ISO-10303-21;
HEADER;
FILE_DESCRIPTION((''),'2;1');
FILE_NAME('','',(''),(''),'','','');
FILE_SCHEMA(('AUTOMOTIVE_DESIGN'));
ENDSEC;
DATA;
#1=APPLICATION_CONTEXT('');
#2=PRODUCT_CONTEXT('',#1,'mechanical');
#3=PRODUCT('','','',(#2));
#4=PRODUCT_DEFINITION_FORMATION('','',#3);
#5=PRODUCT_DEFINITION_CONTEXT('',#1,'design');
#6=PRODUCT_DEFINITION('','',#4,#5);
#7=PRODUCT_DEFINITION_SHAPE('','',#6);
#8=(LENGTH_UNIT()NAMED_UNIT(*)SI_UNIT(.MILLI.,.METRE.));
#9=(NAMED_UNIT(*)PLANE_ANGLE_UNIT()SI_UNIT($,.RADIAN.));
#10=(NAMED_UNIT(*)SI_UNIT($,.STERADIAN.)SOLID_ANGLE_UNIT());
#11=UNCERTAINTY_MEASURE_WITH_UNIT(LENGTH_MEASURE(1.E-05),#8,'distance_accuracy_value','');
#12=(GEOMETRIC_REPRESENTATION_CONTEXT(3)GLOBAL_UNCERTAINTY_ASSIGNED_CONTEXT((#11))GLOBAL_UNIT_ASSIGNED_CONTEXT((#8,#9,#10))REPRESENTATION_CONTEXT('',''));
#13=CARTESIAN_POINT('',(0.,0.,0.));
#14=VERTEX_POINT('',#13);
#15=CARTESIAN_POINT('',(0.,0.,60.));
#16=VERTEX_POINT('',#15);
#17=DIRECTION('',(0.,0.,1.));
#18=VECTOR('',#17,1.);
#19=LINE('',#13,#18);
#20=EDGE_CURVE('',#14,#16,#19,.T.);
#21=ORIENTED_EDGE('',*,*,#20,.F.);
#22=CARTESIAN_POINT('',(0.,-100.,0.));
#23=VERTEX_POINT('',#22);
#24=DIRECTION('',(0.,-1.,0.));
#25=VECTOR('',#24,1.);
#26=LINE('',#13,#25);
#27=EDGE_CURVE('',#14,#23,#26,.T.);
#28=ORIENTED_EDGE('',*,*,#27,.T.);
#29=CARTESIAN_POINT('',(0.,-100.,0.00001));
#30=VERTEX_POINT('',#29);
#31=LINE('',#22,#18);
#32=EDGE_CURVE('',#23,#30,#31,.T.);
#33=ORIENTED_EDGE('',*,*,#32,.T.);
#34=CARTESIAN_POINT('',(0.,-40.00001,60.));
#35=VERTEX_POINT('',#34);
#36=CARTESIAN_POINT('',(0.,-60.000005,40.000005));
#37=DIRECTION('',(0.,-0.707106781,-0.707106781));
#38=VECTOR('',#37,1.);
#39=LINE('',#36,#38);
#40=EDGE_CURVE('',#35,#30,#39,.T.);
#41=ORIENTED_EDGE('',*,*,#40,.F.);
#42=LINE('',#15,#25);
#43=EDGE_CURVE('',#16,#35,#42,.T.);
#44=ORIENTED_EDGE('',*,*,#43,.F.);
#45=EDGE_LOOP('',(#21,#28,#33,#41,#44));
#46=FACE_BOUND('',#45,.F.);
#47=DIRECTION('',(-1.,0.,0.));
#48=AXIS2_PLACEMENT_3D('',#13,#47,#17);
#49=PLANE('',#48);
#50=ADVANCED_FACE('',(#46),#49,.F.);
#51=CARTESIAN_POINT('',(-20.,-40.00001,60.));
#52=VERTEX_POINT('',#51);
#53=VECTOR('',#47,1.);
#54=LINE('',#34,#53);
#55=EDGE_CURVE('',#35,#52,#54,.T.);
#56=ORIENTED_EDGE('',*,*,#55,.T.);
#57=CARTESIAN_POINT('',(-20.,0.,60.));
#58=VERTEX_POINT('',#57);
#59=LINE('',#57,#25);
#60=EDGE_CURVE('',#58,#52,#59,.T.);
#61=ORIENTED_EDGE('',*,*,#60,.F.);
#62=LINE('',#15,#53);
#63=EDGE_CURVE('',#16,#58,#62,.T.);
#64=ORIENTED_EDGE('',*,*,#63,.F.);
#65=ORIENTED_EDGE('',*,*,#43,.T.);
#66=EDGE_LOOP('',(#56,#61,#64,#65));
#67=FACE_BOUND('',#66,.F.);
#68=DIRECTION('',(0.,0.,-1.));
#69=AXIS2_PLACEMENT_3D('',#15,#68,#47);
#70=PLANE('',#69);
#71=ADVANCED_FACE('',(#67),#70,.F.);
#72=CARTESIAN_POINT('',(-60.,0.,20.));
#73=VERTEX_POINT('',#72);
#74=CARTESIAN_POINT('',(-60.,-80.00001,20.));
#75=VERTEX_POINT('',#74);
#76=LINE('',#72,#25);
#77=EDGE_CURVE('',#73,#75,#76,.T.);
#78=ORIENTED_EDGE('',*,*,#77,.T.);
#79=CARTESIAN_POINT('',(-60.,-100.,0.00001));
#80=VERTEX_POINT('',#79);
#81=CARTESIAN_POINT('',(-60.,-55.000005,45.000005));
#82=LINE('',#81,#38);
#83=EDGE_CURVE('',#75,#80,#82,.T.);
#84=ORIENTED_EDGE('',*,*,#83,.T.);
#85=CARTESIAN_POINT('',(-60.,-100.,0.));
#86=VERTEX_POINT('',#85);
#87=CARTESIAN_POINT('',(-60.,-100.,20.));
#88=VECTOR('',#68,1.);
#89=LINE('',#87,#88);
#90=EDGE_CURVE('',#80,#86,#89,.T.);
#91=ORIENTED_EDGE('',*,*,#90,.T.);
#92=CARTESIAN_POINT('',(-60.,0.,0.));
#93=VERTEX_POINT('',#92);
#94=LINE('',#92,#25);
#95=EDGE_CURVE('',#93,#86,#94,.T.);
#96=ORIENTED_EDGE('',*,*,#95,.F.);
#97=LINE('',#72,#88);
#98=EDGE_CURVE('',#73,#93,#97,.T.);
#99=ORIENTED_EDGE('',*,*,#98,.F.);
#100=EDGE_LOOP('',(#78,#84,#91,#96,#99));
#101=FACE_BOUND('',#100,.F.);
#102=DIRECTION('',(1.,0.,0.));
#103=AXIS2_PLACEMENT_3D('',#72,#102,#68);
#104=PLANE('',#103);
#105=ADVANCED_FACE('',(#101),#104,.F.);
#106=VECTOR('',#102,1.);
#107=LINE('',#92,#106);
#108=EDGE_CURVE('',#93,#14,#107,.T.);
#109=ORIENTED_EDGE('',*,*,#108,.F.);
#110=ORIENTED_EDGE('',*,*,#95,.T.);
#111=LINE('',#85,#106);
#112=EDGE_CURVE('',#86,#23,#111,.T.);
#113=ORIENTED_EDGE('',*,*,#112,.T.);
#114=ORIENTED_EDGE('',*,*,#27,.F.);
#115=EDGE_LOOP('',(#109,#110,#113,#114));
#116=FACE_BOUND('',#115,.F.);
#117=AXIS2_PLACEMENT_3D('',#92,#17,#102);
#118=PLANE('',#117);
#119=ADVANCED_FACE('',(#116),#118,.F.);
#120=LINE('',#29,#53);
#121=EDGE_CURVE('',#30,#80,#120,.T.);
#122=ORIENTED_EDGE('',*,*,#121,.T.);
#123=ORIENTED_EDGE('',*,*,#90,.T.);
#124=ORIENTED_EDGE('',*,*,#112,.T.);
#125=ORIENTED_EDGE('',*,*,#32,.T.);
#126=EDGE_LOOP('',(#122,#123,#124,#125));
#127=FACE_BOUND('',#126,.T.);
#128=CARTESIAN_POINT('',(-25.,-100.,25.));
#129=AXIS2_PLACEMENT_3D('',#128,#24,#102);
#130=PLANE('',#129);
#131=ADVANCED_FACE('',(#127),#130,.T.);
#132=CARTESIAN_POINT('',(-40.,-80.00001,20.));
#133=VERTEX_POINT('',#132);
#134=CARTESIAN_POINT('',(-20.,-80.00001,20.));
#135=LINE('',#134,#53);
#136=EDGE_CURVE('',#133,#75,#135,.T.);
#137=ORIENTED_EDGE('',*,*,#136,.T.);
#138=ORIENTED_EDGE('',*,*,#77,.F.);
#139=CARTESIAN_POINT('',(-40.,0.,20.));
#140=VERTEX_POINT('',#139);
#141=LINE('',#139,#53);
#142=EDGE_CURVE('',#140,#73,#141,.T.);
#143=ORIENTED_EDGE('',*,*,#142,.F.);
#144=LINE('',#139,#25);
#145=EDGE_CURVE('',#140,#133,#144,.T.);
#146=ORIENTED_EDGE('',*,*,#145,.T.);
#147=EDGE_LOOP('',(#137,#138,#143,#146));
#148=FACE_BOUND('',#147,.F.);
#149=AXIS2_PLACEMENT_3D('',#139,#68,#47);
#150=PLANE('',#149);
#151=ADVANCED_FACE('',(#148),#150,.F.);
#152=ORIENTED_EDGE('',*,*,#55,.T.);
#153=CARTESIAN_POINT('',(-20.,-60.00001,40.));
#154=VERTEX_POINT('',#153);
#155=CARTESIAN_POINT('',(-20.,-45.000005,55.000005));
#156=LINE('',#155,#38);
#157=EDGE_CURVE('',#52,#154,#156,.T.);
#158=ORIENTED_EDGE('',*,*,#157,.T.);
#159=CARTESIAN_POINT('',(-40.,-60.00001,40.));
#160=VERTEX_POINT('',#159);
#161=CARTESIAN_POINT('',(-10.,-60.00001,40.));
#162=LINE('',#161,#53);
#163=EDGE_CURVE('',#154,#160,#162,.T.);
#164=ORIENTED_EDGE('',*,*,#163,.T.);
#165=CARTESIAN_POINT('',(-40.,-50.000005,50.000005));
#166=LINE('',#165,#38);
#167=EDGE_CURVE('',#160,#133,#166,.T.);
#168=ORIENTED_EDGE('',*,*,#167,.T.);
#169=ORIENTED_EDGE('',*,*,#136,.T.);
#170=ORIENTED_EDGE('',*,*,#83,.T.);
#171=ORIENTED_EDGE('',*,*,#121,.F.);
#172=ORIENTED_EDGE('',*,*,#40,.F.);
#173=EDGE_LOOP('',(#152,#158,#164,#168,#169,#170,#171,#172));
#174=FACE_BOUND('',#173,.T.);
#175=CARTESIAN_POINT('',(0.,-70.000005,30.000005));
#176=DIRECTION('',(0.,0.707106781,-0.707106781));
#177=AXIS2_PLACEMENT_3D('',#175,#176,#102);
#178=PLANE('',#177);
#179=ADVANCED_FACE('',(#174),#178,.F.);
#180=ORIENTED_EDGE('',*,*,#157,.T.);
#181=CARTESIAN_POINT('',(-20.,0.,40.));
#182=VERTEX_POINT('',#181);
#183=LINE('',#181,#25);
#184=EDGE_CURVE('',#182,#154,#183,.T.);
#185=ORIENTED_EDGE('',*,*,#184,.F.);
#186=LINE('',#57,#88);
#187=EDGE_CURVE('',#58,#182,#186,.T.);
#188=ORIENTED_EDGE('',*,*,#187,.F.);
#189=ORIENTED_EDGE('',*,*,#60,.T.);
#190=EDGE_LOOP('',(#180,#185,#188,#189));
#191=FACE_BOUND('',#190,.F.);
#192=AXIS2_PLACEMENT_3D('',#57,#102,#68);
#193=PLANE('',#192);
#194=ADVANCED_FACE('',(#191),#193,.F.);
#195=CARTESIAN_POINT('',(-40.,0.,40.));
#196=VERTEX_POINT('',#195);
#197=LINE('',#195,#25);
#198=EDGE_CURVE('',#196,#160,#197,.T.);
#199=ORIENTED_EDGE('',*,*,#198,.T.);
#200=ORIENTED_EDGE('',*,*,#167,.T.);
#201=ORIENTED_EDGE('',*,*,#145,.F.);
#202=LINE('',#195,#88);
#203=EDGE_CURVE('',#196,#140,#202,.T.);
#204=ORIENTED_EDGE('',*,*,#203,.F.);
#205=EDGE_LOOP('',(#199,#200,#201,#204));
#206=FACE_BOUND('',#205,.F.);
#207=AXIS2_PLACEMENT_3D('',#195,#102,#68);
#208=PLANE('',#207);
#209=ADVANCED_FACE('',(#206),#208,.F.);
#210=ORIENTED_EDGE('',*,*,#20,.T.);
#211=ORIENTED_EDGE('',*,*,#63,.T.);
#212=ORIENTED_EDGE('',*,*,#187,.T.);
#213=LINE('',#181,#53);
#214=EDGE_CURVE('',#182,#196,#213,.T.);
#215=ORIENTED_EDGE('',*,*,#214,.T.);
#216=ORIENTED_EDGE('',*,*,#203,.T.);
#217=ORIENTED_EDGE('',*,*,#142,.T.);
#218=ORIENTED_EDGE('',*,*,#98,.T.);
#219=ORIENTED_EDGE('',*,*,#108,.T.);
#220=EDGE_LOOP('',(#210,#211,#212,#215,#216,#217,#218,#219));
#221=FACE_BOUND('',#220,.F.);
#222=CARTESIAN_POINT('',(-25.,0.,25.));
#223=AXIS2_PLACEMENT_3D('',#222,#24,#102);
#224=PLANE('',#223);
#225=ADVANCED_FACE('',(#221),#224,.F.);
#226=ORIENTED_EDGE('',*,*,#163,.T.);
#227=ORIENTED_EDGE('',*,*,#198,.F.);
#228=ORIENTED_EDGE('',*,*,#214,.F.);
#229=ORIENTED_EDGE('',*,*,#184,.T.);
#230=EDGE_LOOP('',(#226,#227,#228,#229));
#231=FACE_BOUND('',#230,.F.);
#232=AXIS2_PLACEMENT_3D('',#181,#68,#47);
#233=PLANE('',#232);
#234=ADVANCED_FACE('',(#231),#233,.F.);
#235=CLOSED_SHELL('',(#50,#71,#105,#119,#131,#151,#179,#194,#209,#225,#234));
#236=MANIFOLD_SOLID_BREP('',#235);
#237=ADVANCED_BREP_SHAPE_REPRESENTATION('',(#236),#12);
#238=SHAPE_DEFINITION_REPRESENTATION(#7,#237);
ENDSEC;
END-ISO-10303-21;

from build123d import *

# Parameters (mm, degrees)
F1_DEPTH = 100
F2_SIZE  = 59.99999


# Not quite as in the source:
# - a fillet or chamfer is up to 0.001 mm smaller than in the source, because OpenCascade refuses the exact size


with BuildPart() as f1:
    # F0 (on Front) → F1 (new body)
    with BuildSketch(Plane.XZ):
        Polygon((-60, 0), (0, 0), (0, 60), (-20, 60), (-20, 40), (-40, 40), (-40, 20), (-60, 20), align=None)
    extrude(amount=F1_DEPTH)

    # F2 (size 60 in the source; OpenCascade refuses exactly that, so slightly less here)
    f2_edges = [f1.edges().sort_by_distance(p)[0] for p in [
        (-10, -100, 60),
    ]]
    chamfer(f2_edges, length=F2_SIZE)


solid = f1.part
